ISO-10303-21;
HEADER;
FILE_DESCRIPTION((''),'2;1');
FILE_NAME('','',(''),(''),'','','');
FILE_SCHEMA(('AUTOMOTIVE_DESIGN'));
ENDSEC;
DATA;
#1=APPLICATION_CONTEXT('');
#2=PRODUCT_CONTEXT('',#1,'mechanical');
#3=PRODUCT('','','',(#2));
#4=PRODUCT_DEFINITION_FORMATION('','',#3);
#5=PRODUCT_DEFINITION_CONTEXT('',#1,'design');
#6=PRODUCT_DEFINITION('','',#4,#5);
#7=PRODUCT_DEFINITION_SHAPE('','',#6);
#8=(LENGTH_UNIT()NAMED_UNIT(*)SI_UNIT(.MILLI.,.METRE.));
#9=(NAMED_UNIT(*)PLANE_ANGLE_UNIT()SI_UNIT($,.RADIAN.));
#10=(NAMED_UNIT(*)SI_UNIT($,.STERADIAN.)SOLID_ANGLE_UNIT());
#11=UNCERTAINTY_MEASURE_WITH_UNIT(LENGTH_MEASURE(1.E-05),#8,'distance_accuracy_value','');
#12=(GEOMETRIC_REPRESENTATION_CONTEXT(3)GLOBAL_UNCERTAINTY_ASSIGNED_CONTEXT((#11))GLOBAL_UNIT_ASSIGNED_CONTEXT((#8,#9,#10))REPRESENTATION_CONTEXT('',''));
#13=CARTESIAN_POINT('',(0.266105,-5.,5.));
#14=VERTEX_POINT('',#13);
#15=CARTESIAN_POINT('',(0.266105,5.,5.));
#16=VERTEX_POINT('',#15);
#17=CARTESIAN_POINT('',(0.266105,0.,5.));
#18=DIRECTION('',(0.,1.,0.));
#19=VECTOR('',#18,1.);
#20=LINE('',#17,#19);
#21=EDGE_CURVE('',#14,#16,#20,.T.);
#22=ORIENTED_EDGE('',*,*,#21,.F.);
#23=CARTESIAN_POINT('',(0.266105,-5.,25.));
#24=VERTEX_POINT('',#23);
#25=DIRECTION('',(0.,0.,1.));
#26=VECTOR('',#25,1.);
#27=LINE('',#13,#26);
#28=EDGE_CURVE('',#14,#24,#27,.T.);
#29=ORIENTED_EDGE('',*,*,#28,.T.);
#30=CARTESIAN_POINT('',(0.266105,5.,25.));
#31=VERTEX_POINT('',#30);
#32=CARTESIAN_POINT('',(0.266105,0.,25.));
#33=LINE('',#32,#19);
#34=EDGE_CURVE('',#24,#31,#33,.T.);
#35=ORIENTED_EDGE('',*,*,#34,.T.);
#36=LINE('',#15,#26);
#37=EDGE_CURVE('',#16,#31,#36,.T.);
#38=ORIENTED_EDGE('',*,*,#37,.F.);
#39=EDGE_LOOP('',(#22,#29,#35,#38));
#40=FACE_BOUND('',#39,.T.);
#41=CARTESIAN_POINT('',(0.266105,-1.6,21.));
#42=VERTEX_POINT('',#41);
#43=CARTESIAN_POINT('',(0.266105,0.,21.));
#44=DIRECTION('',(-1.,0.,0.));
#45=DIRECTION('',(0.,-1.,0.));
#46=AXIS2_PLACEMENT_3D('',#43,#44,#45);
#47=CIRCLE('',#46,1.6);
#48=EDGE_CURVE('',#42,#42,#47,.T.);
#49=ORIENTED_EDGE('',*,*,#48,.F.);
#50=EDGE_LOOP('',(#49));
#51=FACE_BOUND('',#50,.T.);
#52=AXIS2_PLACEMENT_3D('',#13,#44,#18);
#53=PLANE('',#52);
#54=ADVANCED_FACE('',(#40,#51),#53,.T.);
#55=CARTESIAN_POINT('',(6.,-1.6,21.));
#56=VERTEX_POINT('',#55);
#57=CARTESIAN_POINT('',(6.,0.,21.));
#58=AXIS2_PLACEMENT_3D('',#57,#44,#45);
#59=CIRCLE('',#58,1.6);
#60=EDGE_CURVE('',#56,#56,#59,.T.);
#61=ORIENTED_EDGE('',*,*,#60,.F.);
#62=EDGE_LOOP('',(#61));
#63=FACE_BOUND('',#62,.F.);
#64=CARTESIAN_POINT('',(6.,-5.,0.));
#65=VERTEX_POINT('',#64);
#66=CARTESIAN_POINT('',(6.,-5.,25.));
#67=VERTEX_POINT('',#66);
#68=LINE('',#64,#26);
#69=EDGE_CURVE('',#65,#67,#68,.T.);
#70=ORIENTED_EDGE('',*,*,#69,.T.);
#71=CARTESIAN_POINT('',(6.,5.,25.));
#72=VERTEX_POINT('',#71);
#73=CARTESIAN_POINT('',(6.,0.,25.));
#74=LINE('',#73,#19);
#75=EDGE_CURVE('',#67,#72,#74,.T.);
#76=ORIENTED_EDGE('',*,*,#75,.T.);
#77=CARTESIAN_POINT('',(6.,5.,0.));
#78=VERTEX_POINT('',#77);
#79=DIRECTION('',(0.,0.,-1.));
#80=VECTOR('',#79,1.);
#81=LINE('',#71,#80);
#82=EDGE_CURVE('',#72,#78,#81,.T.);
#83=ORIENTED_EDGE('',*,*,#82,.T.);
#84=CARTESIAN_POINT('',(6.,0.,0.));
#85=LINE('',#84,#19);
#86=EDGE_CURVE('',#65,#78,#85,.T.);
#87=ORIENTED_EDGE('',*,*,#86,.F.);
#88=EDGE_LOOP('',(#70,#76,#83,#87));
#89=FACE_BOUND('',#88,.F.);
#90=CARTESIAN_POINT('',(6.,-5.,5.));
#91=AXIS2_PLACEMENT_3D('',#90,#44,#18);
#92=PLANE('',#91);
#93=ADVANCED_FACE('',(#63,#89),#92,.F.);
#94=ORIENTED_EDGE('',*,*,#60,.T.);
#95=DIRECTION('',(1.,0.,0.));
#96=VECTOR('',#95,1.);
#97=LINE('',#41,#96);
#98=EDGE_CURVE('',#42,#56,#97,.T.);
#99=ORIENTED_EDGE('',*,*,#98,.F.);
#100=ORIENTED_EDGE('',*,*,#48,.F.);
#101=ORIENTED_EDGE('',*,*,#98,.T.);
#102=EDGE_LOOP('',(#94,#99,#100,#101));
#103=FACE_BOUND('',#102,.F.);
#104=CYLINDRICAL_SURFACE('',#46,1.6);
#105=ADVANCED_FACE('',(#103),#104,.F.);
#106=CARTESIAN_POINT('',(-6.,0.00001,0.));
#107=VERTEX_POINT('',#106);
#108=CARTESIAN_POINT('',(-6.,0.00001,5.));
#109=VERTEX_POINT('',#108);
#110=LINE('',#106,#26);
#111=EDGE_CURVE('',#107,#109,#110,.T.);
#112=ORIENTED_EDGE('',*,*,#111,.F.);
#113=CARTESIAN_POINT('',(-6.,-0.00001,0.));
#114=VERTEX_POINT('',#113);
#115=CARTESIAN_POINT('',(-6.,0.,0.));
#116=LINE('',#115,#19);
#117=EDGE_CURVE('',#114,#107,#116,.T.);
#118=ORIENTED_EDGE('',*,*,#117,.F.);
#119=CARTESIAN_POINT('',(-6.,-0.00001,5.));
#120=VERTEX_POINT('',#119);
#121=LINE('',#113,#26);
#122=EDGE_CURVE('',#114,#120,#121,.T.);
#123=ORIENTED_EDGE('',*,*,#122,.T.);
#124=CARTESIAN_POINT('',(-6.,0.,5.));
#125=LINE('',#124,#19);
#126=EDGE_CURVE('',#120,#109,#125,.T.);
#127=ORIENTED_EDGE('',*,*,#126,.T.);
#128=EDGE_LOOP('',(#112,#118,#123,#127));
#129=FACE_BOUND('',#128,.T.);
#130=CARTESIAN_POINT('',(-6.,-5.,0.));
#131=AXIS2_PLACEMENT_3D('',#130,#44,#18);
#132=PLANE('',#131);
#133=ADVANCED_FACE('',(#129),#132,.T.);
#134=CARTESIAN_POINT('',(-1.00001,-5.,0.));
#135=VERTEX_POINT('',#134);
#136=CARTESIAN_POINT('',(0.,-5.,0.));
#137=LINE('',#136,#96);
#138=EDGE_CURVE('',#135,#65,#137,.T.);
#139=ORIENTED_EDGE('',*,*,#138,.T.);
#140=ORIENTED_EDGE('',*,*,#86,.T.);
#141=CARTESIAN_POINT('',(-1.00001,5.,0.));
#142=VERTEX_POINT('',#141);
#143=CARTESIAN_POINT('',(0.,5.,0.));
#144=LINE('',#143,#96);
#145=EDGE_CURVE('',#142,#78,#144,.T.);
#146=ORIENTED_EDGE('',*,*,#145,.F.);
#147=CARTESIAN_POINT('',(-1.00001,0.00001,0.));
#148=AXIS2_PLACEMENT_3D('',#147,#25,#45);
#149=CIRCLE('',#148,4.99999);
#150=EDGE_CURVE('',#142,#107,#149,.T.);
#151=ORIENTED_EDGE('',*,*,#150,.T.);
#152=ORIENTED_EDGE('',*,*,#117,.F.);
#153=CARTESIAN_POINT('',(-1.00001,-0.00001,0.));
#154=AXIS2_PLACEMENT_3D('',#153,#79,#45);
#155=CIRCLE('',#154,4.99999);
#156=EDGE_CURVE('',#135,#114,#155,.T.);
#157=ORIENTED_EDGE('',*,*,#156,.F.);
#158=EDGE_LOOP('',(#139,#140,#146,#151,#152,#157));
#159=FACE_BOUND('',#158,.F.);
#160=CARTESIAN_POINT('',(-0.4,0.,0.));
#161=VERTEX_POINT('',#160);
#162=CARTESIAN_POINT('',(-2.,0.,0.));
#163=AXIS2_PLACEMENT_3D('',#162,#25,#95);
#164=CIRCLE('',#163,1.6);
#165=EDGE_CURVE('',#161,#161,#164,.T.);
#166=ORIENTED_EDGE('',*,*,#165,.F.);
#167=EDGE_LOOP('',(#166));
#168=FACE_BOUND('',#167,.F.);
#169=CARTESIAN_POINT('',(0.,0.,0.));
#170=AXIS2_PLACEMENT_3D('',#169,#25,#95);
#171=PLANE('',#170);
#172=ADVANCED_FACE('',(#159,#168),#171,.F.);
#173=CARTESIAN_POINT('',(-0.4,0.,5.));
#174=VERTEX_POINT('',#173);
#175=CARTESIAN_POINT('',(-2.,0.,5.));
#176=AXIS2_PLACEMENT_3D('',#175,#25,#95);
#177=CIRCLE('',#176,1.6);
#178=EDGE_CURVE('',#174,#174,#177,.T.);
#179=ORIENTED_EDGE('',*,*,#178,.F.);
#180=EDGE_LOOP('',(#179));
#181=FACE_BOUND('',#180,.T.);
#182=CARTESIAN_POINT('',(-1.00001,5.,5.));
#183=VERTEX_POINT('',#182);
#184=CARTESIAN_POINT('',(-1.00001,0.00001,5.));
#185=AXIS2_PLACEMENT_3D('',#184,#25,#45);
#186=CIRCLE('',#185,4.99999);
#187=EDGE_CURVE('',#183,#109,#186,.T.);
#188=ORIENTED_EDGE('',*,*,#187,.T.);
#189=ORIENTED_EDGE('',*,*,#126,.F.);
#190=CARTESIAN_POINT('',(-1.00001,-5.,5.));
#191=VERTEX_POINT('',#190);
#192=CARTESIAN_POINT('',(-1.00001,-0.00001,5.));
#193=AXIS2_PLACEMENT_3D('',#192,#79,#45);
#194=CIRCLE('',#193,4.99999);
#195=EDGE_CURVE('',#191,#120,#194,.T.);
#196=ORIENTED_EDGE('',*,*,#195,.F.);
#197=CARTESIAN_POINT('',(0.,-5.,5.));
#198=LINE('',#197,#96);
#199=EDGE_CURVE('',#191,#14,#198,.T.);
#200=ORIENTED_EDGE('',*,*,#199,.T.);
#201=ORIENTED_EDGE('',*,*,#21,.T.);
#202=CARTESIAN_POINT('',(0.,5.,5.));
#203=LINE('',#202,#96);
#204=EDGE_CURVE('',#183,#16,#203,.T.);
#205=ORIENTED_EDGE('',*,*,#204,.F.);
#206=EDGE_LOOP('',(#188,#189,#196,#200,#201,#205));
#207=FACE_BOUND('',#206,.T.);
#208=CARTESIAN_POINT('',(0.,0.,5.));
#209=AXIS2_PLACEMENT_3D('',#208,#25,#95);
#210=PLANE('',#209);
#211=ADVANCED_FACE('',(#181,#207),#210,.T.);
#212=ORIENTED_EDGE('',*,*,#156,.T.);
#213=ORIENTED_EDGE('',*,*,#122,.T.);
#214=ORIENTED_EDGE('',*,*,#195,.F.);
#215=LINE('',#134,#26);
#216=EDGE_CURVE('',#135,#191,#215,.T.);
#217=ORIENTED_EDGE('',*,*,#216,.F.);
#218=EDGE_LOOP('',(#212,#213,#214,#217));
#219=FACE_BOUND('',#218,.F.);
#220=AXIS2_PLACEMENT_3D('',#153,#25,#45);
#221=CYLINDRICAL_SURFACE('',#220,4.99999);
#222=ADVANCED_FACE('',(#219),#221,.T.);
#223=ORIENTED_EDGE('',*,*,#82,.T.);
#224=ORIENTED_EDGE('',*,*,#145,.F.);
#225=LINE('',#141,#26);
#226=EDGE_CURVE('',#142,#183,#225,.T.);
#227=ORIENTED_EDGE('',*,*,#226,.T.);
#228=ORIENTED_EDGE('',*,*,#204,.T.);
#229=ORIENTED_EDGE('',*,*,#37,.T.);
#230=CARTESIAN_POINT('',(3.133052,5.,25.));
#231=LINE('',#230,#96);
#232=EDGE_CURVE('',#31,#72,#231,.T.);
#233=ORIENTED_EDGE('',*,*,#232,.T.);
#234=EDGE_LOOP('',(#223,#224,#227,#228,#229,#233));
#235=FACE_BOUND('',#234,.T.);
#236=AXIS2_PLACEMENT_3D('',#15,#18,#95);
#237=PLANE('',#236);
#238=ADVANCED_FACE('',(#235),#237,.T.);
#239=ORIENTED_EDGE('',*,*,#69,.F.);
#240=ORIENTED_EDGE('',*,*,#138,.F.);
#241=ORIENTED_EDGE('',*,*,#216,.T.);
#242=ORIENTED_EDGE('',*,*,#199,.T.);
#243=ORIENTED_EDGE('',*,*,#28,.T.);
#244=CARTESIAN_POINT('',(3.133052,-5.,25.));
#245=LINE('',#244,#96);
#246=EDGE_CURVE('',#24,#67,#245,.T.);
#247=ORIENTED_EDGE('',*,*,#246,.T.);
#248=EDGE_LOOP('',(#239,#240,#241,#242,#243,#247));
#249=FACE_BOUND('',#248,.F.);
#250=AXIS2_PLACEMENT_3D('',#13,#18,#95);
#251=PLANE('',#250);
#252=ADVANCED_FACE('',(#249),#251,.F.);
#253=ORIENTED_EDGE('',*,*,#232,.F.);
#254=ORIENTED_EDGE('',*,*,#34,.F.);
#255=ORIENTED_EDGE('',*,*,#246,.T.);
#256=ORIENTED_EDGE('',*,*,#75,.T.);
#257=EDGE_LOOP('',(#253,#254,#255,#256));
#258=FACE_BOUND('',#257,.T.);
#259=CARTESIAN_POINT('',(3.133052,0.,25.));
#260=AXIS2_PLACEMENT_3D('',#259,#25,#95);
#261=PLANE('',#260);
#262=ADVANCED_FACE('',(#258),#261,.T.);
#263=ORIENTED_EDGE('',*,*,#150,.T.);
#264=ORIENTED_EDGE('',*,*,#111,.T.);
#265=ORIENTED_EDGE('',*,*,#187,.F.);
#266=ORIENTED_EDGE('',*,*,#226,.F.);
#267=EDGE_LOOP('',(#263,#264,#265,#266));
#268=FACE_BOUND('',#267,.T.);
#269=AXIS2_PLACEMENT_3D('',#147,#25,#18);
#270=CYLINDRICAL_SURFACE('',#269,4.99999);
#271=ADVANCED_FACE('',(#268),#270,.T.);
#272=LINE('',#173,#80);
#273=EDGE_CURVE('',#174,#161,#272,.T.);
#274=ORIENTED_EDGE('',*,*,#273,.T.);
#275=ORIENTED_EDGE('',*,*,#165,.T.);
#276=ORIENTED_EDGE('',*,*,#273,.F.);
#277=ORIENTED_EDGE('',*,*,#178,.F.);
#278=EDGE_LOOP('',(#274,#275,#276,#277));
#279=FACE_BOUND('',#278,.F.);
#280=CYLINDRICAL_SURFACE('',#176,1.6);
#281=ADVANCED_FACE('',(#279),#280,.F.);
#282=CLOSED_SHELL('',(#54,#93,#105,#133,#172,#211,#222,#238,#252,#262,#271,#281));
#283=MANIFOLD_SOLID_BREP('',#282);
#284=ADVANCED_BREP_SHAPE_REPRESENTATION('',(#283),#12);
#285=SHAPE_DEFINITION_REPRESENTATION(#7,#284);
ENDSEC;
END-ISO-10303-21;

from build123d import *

# Parameters (mm, degrees)
F0_W     = 12
F0_H     = 10
F1_DEPTH = 5
F2_W     = 5.7338950146
F2_H     = 10
F3_DEPTH = 20
F4_R     = 1.6
F5_DEPTH = 10
F6_R     = 1.6
F7_DEPTH = 10
F8_R     = 4.99999


# Not quite as in the source:
# - a fillet or chamfer is up to 0.001 mm smaller than in the source, because OpenCascade refuses the exact size


with BuildPart() as f1:
    # F0 (on Top) → F1 (new body)
    with BuildSketch(Plane.XY):
        Rectangle(F0_W, F0_H)
    extrude(amount=F1_DEPTH)

    # F2 (on face) → F3 (join)
    with BuildSketch(Plane.XY.offset(5)):
        with Locations((3.1330524927, 0)):
            Rectangle(F2_W, F2_H)
    extrude(amount=F3_DEPTH)

    # F4 (on face) → F5 (cut)
    with BuildSketch(Plane(origin=(0.2661049854, 0, 0), x_dir=(0, -1, 0), z_dir=(-1, 0, 0))):
        with Locations((0, 21)):
            Circle(F4_R)
    extrude(amount=-F5_DEPTH, mode=Mode.SUBTRACT)

    # F6 (on face) → F7 (cut)
    with BuildSketch(Plane.XY.offset(5)):
        with Locations((-2, 0)):
            Circle(F6_R)
    extrude(amount=-F7_DEPTH, mode=Mode.SUBTRACT)

    # F8 (radius 5 in the source; OpenCascade refuses exactly that, so slightly less here)
    f8_edges = [f1.edges().sort_by_distance(p)[0] for p in [
        (-6, -5, 2.5),
        (-6, 5, 2.5),
    ]]
    fillet(f8_edges, radius=F8_R)


solid = f1.part
